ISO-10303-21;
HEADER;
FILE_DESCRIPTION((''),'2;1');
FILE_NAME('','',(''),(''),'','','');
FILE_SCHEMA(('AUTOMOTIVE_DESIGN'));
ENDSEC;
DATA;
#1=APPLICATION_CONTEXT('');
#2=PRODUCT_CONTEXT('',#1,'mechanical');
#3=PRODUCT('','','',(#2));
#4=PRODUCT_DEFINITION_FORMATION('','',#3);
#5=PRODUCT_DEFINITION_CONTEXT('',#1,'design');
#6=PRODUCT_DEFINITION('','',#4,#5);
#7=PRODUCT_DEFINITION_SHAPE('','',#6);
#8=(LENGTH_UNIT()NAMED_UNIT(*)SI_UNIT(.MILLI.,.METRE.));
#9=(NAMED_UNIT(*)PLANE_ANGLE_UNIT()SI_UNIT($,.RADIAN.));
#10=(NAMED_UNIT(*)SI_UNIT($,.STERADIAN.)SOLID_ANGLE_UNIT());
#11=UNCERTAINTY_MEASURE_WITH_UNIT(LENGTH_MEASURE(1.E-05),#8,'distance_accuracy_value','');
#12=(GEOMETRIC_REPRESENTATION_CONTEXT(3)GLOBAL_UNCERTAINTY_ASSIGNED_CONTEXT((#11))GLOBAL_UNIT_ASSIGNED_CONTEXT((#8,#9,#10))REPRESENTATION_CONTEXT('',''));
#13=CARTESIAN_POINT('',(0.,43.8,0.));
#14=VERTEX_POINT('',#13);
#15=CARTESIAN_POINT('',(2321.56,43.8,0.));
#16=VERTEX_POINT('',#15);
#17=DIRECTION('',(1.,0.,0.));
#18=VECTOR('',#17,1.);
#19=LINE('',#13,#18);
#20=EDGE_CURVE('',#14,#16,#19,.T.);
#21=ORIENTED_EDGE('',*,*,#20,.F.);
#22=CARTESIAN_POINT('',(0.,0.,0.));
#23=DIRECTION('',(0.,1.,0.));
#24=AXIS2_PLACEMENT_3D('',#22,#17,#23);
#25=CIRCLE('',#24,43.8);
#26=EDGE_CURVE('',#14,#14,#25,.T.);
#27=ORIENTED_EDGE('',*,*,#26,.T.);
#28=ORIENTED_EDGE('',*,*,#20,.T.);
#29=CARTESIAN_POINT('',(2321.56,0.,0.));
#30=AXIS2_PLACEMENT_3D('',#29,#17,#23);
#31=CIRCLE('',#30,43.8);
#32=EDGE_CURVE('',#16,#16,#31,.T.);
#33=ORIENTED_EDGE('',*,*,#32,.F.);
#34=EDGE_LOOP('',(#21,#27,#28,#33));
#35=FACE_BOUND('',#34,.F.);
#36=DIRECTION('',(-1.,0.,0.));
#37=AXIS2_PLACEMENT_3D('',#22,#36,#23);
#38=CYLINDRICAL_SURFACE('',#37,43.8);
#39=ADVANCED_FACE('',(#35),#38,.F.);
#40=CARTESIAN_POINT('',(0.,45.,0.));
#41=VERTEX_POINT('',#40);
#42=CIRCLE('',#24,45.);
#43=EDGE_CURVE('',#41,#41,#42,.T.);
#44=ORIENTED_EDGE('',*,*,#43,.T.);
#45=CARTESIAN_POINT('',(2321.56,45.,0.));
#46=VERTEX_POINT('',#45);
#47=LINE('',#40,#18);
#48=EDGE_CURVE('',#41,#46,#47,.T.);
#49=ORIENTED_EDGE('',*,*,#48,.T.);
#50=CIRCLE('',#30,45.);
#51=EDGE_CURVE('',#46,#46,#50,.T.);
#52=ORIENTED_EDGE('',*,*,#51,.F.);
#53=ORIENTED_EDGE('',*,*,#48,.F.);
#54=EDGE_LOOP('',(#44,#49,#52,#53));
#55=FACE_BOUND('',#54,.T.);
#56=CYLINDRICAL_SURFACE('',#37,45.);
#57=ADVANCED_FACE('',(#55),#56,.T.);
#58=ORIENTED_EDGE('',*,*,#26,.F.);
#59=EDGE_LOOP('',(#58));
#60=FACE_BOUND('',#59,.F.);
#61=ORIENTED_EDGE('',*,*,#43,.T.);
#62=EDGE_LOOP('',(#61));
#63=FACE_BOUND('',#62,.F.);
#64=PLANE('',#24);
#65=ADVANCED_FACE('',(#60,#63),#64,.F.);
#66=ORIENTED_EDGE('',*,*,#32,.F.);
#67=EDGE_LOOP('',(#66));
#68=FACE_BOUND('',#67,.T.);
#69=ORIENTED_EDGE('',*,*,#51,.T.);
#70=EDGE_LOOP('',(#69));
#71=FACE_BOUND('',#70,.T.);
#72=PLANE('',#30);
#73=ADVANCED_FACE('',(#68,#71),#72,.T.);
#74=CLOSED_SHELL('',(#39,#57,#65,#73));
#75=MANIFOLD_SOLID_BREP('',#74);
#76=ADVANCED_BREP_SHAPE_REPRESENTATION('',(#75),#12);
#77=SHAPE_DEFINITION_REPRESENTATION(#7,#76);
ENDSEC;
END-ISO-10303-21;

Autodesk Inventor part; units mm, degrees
ref_plane "YZ Plane" through (0, 0, 0) normal (1, 0, 0) x (0, 1, 0)
ref_plane "XZ Plane" through (0, 0, 0) normal (0, 1, 0) x (-1, 0, 0)
ref_plane "XY Plane" through (0, 0, 0) normal (0, 0, 1) x (1, 0, 0)
sketch "Sketch1" plane through (0, 0, 0) normal (1, 0, 0) x (0, 1, 0)
  circle A0 centre (0, 0) radius 45
  circle A1 centre (0, 0) radius 43.8
  dimension "d0" = 90
  dimension "d1" = 1.2
extrude "Extrusion1" add sketch "Sketch1" along normal blind 2321.56
equation "\"d0\" = OD"
equation "\"d1\" = t"
equation "\"d2\" = L"
equation "\"OD\" = 90"
equation "\"t\" = 1.2"
equation "\"L\" = PL"
equation "\"ID\" = 87.6"
equation "\"PL\" = 2321.56"
properties part number "ISO 4065 Pipe DN90x1.2xS40 - 2321.56000000" material "PVC-Piping"
